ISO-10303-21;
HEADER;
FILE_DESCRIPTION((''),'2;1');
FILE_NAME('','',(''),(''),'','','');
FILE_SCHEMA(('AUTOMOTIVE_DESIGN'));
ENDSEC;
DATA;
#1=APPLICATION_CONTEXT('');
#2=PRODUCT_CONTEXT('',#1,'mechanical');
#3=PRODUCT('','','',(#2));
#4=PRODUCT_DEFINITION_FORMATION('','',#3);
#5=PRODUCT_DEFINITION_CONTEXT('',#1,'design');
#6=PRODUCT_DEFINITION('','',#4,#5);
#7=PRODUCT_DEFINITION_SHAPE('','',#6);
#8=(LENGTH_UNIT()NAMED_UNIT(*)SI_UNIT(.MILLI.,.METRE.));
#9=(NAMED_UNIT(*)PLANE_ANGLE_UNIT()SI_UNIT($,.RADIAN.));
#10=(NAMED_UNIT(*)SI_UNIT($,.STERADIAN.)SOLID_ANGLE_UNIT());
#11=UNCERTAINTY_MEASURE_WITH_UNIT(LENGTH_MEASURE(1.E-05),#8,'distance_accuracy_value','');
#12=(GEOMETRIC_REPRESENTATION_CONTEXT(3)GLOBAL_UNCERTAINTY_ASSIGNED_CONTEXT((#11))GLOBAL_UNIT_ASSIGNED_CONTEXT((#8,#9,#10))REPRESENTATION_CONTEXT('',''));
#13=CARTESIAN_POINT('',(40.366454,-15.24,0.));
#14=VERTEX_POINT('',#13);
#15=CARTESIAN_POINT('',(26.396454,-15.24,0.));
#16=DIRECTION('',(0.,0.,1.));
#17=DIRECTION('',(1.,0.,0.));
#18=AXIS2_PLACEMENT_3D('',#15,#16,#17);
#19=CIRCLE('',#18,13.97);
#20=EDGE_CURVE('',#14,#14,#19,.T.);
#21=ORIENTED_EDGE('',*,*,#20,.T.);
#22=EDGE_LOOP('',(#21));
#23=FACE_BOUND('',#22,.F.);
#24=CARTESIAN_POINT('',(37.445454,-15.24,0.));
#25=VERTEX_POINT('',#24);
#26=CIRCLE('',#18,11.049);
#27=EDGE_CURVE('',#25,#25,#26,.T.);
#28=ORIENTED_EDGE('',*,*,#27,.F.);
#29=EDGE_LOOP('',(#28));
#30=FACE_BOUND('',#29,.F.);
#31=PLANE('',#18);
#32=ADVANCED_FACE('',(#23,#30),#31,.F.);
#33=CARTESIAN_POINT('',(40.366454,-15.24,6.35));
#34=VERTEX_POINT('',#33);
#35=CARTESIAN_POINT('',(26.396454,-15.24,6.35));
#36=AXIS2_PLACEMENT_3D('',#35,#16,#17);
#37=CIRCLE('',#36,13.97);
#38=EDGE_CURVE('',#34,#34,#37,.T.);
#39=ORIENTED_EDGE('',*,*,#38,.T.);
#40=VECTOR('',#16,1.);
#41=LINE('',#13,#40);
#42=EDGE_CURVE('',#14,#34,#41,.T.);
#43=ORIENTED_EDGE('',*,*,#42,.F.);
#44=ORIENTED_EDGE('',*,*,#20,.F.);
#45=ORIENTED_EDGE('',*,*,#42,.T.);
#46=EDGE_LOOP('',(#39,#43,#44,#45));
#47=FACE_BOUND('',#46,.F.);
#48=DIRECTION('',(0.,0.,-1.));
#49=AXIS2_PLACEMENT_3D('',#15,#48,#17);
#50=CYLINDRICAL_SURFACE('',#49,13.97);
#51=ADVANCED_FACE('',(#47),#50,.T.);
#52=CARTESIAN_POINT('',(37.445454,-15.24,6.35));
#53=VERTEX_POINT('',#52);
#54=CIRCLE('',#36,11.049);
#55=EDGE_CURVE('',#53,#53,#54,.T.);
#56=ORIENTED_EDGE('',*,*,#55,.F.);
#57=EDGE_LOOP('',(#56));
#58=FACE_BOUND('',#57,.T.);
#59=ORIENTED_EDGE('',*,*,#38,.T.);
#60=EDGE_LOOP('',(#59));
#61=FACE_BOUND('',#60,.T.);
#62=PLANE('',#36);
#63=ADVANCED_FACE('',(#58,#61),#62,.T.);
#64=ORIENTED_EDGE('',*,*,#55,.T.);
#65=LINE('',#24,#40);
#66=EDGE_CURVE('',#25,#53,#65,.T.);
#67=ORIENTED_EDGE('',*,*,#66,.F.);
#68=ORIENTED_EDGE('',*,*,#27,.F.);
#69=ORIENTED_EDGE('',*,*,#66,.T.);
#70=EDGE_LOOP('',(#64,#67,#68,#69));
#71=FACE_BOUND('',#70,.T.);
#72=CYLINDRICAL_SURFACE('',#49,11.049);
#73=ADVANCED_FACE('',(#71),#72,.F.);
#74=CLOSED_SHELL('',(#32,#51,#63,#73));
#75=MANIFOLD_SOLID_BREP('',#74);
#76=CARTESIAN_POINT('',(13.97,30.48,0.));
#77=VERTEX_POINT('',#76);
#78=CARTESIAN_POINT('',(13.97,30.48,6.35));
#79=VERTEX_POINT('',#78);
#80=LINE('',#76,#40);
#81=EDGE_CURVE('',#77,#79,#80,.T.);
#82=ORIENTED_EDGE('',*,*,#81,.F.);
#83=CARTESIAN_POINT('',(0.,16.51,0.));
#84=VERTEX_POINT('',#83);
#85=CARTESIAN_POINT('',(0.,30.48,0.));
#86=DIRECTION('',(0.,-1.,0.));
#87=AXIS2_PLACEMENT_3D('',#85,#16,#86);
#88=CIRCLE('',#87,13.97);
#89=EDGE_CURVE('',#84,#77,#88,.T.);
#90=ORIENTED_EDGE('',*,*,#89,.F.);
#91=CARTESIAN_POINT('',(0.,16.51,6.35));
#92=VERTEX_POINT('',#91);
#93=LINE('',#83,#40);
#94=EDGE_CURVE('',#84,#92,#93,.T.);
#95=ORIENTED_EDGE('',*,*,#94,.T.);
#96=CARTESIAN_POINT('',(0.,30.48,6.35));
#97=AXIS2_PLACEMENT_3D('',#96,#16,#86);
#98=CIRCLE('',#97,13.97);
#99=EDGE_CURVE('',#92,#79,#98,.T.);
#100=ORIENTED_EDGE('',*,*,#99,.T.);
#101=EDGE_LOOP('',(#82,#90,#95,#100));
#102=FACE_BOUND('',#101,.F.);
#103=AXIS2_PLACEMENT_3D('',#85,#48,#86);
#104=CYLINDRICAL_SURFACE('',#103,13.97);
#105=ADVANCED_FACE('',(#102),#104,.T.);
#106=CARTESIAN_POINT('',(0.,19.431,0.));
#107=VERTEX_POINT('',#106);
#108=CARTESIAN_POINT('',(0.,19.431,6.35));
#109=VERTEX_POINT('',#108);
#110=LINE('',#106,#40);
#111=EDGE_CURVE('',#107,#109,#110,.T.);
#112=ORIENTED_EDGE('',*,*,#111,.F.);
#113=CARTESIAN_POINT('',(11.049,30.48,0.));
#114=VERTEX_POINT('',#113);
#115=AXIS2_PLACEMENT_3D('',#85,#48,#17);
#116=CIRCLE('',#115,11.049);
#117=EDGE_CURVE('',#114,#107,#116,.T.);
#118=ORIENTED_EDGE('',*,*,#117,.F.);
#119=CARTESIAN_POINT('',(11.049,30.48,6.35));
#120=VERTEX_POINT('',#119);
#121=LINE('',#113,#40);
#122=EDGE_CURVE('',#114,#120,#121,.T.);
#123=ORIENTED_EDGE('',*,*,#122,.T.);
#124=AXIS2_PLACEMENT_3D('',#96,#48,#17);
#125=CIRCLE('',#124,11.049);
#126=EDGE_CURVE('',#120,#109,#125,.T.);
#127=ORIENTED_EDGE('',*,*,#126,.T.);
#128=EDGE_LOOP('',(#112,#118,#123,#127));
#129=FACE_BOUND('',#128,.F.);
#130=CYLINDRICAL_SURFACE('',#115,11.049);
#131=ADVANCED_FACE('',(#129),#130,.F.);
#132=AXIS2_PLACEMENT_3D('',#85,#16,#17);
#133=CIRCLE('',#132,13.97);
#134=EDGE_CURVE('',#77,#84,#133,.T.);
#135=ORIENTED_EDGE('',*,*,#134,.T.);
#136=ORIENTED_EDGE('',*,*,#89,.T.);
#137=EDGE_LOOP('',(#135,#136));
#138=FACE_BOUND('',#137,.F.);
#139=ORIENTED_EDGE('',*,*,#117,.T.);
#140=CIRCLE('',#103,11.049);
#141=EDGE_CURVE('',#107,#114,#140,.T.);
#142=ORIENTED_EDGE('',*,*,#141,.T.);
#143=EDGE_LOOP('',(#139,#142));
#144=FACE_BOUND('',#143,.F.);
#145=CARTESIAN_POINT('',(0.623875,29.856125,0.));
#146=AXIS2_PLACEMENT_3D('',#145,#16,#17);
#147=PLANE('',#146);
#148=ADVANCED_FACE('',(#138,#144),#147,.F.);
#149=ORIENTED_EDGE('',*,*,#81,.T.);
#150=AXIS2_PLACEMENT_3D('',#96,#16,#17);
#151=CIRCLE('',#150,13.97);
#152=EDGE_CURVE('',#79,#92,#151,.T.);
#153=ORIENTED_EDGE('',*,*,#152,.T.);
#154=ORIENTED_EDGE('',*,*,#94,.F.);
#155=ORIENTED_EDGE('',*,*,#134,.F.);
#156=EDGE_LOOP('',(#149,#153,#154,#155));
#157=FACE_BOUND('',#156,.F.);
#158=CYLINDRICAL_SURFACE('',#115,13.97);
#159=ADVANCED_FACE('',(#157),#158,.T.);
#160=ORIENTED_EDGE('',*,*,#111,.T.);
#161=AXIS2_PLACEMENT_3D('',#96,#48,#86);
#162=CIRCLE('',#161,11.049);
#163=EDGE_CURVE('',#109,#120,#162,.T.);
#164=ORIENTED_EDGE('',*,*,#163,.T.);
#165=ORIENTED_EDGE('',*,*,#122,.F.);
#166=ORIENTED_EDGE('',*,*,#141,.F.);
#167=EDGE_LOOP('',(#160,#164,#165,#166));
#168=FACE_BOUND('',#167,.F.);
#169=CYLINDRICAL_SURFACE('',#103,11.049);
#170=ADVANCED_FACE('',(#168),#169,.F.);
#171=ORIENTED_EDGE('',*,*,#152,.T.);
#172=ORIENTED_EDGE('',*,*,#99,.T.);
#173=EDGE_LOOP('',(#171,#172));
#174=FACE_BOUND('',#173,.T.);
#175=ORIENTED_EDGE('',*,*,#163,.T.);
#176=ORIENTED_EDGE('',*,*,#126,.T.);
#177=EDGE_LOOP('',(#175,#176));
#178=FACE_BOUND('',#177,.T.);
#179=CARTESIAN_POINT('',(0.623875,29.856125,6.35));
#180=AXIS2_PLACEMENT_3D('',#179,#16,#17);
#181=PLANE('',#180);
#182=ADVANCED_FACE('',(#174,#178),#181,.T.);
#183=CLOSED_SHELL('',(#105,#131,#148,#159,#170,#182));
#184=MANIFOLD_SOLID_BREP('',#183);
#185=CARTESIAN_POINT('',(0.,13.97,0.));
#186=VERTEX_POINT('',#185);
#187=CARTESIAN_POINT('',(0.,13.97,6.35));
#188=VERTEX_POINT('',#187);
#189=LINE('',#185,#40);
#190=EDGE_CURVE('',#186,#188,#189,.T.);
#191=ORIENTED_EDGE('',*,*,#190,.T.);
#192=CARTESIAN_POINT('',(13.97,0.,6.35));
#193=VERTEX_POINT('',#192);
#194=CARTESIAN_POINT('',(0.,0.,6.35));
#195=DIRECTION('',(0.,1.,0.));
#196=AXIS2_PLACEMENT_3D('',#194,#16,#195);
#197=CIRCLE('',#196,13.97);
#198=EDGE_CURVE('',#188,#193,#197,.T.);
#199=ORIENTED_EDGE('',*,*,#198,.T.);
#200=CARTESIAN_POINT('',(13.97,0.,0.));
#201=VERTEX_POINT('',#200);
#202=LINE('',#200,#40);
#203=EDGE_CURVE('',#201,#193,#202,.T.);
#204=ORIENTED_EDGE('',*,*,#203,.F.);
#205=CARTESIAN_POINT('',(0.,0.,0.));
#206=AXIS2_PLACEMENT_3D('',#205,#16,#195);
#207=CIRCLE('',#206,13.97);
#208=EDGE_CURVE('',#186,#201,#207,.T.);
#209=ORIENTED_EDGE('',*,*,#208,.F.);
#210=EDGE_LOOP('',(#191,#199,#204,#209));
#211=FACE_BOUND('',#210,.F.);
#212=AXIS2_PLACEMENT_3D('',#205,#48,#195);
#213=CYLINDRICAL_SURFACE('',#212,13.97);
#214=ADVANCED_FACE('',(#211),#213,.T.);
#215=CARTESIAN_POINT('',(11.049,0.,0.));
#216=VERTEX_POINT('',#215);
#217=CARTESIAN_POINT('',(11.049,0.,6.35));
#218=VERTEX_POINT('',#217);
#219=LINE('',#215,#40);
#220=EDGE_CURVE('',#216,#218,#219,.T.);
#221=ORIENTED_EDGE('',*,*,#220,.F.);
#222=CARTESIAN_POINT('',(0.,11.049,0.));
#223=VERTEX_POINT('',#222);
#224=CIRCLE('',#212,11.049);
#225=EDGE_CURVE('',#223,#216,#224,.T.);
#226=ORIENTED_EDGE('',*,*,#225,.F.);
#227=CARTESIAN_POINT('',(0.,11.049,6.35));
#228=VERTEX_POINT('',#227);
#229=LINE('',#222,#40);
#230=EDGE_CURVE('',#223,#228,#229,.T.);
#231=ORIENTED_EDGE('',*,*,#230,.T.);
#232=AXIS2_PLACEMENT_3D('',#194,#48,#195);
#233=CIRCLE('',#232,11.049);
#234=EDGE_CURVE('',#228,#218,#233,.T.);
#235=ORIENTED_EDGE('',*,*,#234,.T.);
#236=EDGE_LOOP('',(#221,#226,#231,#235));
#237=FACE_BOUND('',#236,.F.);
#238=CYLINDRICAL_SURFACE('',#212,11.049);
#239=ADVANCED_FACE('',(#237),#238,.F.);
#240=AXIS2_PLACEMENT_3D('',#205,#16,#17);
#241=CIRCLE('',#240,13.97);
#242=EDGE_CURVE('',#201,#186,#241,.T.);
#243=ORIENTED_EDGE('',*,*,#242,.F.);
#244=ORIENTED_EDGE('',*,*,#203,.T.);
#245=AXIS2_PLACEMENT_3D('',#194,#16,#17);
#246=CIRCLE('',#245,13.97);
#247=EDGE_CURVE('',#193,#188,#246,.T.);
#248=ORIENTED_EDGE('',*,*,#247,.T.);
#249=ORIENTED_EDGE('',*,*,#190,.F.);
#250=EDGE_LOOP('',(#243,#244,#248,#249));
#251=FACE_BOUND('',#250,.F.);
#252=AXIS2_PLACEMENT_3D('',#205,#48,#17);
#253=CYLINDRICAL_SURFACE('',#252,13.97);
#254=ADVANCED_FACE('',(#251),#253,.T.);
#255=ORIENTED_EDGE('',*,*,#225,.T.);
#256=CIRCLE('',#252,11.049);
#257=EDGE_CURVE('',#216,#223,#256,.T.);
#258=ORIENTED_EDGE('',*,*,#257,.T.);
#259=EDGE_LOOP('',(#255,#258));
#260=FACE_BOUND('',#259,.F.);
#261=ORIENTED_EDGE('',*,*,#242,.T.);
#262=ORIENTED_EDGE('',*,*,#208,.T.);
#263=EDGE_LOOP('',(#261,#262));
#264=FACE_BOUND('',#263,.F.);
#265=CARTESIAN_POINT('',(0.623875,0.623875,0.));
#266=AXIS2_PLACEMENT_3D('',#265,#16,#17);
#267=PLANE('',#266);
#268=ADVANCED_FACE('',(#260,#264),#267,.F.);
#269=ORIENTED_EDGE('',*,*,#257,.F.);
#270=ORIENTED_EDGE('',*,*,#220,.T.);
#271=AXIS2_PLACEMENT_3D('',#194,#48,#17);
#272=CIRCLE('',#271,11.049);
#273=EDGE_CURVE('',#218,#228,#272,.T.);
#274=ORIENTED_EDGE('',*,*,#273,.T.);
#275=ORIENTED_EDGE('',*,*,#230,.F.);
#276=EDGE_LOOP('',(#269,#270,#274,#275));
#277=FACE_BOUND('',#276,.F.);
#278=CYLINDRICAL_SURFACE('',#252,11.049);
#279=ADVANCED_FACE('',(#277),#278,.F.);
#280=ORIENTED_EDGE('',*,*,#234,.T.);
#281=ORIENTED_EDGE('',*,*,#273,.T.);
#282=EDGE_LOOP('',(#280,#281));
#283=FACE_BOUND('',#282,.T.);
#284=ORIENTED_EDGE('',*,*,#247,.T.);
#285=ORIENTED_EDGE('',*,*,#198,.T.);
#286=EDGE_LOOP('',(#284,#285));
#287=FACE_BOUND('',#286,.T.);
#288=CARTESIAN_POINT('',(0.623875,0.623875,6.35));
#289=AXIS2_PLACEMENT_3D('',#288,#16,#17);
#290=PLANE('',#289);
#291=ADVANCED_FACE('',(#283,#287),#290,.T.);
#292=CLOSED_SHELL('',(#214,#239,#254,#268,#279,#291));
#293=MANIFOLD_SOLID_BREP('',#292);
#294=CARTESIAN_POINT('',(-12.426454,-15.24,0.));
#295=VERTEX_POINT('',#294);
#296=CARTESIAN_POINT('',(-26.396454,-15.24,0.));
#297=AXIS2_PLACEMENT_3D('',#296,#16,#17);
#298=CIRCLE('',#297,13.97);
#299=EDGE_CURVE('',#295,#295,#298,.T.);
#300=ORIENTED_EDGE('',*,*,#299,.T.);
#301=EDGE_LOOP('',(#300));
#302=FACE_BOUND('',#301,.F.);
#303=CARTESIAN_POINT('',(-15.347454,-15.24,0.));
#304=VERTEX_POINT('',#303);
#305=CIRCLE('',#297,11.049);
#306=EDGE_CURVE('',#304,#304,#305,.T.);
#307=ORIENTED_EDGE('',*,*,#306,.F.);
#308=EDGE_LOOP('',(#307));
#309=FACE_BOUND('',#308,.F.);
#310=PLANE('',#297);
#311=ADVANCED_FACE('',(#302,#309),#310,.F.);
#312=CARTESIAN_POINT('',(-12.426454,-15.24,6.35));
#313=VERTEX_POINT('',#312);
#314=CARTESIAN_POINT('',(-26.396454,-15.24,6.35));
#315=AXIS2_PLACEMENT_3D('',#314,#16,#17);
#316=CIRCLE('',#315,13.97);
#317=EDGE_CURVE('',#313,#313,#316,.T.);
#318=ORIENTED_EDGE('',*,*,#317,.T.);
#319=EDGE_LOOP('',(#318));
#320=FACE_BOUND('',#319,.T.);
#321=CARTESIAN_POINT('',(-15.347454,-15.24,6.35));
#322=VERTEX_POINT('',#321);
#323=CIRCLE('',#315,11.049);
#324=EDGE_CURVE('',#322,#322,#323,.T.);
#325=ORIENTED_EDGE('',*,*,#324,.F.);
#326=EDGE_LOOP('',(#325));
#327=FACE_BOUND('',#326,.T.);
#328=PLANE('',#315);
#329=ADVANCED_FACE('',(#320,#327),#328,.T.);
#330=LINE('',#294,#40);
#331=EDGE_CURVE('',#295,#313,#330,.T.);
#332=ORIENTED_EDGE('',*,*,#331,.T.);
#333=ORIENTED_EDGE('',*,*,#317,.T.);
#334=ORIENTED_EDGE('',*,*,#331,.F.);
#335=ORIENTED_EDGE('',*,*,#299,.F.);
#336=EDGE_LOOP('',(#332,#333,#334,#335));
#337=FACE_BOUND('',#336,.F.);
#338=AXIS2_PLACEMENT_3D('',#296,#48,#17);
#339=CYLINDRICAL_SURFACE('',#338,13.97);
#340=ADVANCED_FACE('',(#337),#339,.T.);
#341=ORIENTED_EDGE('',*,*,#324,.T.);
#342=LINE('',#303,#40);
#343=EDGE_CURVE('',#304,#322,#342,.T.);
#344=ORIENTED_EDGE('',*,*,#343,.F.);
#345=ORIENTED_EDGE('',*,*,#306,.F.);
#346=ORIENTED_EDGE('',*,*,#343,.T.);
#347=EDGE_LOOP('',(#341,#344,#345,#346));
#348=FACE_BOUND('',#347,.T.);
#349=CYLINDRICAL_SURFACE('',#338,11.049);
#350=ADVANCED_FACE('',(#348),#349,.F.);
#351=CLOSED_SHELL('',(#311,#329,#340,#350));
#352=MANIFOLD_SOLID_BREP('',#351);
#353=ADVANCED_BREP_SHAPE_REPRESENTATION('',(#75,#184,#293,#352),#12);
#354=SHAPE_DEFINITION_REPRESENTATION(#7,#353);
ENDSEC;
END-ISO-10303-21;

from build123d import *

# Parameters (mm, degrees)
F1_DEPTH = 6.35
F0_R     = 13.97
F0_R_2   = 11.049


with BuildPart() as f1:
    # F0 (on Top) → F1 (new body)
    with BuildSketch(Plane.XY):
        with BuildLine():
            ThreePointArc((13.97, 30.48), (-9.8782817332, 40.3582817332), (0, 16.51))
            ThreePointArc((0, 16.51), (9.8782817332, 20.6017182668), (13.97, 30.48))
        make_face()
        with BuildLine():
            ThreePointArc((11.049, 30.48), (7.8128228253, 22.6671771747), (0, 19.431))
            ThreePointArc((0, 19.431), (-7.8128228253, 38.2928228253), (11.049, 30.48))
        make_face(mode=Mode.SUBTRACT)
    extrude(amount=F1_DEPTH)


with BuildPart() as f1b:
    # F0 (on Top) → F1, piece 2 (new body)
    with BuildSketch(Plane.XY):
        with Locations((26.3964543073, -15.24)):
            Circle(F0_R)
        with Locations((26.3964543073, -15.24)):
            Circle(F0_R_2, mode=Mode.SUBTRACT)
    extrude(amount=F1_DEPTH)


with BuildPart() as f1c:
    # F0 (on Top) → F1, piece 3 (new body)
    with BuildSketch(Plane.XY):
        with Locations((-26.3964543073, -15.24)):
            Circle(F0_R)
        with Locations((-26.3964543073, -15.24)):
            Circle(F0_R_2, mode=Mode.SUBTRACT)
    extrude(amount=F1_DEPTH)


with BuildPart() as f1d:
    # F0 (on Top) → F1, piece 4 (new body)
    with BuildSketch(Plane.XY):
        with BuildLine():
            ThreePointArc((13.97, 0), (9.8782817332, 9.8782817332), (0, 13.97))
            ThreePointArc((0, 13.97), (-9.8782817332, -9.8782817332), (13.97, 0))
        make_face()
        with BuildLine():
            ThreePointArc((0, 11.049), (7.8128228253, 7.8128228253), (11.049, 0))
            ThreePointArc((11.049, 0), (-7.8128228253, -7.8128228253), (0, 11.049))
        make_face(mode=Mode.SUBTRACT)
    extrude(amount=F1_DEPTH)


solid = Compound([f1.part, f1b.part, f1c.part, f1d.part])
